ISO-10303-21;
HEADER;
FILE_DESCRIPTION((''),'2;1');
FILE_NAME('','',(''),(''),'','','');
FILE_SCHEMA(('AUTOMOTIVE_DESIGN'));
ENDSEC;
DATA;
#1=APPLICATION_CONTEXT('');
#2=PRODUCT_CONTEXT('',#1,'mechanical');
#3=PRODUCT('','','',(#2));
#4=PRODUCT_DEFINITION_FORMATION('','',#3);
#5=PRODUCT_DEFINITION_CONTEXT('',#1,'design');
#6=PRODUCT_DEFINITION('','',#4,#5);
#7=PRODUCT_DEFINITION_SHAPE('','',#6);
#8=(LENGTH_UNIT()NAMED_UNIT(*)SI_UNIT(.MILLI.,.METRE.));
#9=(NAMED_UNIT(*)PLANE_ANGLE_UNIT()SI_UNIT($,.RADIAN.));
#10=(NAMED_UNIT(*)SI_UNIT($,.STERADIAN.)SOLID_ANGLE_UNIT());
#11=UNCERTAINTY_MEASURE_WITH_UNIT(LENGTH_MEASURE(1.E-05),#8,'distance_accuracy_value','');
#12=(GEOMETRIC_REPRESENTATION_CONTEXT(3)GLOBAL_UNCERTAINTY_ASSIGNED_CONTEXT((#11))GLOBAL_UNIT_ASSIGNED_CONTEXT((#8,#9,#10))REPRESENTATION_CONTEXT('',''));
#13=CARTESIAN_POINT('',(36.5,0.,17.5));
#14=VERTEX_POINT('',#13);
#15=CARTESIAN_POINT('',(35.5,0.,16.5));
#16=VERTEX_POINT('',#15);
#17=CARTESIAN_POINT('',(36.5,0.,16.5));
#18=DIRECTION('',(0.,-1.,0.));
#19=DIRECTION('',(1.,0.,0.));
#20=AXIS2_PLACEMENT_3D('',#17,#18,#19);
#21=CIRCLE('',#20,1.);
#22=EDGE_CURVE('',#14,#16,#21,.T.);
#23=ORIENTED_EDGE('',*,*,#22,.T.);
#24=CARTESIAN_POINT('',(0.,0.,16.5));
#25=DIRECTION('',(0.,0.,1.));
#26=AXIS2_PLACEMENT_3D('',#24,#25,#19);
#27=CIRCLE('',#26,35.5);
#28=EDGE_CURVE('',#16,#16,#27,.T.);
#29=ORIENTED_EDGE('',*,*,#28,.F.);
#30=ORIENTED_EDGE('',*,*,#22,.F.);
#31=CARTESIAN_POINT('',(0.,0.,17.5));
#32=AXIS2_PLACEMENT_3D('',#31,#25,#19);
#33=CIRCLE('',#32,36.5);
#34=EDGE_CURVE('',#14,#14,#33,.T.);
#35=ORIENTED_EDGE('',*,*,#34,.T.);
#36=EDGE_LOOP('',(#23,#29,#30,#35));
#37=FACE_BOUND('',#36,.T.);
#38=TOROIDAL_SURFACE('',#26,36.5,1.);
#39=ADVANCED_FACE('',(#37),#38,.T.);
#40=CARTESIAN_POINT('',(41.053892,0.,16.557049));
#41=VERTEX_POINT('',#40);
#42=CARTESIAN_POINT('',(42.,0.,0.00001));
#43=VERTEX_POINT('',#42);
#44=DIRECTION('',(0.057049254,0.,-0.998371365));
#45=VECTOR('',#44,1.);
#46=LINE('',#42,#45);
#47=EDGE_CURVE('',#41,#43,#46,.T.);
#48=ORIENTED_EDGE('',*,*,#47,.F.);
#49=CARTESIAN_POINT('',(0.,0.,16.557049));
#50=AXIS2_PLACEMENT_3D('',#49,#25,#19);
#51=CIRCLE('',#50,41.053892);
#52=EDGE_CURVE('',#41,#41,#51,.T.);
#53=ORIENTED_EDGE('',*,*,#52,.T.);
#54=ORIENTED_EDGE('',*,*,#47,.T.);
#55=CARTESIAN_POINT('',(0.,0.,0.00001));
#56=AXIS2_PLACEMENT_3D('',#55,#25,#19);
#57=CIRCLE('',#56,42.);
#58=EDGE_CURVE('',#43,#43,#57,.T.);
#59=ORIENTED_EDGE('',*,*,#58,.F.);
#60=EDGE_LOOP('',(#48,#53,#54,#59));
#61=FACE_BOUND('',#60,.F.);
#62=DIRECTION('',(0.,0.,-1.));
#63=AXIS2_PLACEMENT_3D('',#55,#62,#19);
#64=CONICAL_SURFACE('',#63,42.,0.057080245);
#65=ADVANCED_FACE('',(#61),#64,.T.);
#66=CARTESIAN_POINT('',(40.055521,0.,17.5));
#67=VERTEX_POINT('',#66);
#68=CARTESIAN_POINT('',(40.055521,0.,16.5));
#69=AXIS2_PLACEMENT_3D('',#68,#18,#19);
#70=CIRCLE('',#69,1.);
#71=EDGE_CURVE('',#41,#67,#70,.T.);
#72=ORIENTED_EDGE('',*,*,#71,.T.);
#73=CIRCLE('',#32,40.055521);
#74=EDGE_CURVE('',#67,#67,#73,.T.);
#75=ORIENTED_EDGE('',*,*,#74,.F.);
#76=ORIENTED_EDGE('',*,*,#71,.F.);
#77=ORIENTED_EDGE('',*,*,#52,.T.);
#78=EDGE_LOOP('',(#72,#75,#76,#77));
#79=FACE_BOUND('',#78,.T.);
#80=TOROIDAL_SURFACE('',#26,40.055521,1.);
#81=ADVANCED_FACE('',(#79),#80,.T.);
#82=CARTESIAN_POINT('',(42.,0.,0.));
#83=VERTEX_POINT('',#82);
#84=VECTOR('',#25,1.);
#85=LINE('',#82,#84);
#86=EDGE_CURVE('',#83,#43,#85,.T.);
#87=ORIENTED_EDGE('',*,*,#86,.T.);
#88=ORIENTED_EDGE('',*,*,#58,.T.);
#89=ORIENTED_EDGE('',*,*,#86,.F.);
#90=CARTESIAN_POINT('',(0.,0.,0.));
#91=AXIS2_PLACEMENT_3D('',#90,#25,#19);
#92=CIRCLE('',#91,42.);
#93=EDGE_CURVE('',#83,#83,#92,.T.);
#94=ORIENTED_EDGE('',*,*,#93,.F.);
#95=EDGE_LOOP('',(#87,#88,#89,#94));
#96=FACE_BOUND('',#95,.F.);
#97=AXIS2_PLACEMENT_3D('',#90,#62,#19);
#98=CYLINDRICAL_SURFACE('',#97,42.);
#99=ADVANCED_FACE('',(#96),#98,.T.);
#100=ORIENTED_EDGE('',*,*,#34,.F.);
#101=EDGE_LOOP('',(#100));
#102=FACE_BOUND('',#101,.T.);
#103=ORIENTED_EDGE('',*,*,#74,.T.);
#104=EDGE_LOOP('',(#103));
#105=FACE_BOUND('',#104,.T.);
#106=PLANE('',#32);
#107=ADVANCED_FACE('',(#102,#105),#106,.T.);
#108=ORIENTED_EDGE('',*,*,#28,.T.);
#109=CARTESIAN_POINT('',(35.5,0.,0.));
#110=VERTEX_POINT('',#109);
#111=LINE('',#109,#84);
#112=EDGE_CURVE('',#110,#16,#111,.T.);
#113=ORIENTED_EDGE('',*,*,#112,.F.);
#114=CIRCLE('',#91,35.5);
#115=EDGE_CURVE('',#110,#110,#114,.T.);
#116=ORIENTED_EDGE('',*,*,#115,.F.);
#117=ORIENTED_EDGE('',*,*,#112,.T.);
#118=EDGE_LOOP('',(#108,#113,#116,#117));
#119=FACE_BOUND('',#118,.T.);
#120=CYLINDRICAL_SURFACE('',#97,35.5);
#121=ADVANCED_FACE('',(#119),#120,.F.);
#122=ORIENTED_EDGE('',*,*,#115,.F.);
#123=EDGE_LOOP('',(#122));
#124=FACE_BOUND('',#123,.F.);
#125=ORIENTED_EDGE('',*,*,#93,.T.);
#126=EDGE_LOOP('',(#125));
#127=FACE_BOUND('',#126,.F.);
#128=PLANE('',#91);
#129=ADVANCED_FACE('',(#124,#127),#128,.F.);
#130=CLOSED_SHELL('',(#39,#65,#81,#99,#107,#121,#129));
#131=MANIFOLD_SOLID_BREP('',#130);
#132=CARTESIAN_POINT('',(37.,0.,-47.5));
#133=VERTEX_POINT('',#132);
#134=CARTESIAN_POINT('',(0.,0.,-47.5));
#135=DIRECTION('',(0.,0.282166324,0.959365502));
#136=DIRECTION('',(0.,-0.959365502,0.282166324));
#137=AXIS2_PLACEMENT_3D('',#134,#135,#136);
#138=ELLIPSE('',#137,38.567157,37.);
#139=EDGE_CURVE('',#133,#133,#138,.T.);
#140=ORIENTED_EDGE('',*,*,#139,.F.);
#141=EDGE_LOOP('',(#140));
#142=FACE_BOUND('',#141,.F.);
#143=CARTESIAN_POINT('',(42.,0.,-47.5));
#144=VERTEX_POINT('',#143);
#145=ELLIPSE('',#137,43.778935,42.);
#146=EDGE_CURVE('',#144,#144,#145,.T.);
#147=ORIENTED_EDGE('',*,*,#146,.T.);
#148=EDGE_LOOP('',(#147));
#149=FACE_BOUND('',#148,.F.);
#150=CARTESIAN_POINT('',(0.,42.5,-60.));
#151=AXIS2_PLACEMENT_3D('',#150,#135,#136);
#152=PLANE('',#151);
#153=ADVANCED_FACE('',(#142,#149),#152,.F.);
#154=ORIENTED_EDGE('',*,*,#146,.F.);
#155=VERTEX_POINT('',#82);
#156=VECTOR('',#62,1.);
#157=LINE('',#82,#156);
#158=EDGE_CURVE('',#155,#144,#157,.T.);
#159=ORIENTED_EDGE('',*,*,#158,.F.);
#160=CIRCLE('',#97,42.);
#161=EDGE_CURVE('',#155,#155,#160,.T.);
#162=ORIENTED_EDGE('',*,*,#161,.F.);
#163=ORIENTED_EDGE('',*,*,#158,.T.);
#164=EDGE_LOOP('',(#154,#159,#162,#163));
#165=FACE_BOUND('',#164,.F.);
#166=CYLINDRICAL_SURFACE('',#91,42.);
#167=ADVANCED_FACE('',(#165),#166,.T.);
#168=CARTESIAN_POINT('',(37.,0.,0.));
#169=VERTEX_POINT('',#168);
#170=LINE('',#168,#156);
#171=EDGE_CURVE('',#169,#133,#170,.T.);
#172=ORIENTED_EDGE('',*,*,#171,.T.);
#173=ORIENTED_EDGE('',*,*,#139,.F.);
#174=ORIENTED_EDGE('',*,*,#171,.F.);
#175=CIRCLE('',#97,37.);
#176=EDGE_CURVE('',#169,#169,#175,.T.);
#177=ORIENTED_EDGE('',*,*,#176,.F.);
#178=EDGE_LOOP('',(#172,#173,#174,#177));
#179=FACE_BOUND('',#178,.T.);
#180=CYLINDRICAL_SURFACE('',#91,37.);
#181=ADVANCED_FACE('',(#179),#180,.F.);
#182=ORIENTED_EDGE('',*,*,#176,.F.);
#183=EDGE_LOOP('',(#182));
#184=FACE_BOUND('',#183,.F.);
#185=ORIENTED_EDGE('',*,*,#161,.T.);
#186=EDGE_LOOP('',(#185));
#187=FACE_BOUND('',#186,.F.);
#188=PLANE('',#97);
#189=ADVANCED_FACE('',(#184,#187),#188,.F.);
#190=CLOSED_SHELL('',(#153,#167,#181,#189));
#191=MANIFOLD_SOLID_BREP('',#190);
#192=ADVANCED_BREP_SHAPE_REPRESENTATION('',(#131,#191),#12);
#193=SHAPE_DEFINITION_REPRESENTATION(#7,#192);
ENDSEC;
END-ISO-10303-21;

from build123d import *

# Parameters (mm, degrees)
F0_R     = 42
F0_R_2   = 35.5
F1_DEPTH = 17.5
F2_SIZE2 = 17.49999
F2_SIZE  = 0.99999
F3_R     = 1
F4_R     = 42
F4_R_2   = 37
F5_DEPTH = 60
F7_DEPTH = 45


# Not quite as in the source:
# - a fillet or chamfer is up to 0.001 mm smaller than in the source, because OpenCascade refuses the exact size


with BuildPart() as f1:
    # F0 (on Top) → F1 (new body)
    with BuildSketch(Plane.XY):
        Circle(F0_R)
        Circle(F0_R_2, mode=Mode.SUBTRACT)
    extrude(amount=F1_DEPTH)

    # F2 (size 1 and 17.5 in the source; OpenCascade refuses exactly that, so slightly less here)
    f2_edges = [f1.edges().sort_by_distance(p)[0] for p in [
        (-42, 0, 17.5),
    ]]
    f2_side = f1.faces().sort_by_distance((-40.812061, 0, 17.5))[0]
    chamfer(f2_edges, length=F2_SIZE, length2=F2_SIZE2, reference=f2_side)

    # F3
    f3_edges = [f1.edges().sort_by_distance(p)[0] for p in [
        (-41.00001, 0, 17.5),
        (-35.5, 0, 17.5),
    ]]
    fillet(f3_edges, radius=F3_R)


with BuildPart() as f5:
    # F4 (on face) → F5 (new body)
    with BuildSketch(Plane(origin=(0, 0, 0), x_dir=(1, 0, 0), z_dir=(0, 0, -1))):
        Circle(F4_R)
        Circle(F4_R_2, mode=Mode.SUBTRACT)
    extrude(amount=F5_DEPTH)

    # F6 (on Right) → F7 (cut, symmetric)
    with BuildSketch(Plane.YZ):
        Polygon((42.5, -69.3717226386), (42.5, -60), (-42.5, -35), (-49.787659198, -69.3717226386), align=None)
    extrude(amount=F7_DEPTH, both=True, mode=Mode.SUBTRACT)


solid = Compound([f1.part, f5.part])
